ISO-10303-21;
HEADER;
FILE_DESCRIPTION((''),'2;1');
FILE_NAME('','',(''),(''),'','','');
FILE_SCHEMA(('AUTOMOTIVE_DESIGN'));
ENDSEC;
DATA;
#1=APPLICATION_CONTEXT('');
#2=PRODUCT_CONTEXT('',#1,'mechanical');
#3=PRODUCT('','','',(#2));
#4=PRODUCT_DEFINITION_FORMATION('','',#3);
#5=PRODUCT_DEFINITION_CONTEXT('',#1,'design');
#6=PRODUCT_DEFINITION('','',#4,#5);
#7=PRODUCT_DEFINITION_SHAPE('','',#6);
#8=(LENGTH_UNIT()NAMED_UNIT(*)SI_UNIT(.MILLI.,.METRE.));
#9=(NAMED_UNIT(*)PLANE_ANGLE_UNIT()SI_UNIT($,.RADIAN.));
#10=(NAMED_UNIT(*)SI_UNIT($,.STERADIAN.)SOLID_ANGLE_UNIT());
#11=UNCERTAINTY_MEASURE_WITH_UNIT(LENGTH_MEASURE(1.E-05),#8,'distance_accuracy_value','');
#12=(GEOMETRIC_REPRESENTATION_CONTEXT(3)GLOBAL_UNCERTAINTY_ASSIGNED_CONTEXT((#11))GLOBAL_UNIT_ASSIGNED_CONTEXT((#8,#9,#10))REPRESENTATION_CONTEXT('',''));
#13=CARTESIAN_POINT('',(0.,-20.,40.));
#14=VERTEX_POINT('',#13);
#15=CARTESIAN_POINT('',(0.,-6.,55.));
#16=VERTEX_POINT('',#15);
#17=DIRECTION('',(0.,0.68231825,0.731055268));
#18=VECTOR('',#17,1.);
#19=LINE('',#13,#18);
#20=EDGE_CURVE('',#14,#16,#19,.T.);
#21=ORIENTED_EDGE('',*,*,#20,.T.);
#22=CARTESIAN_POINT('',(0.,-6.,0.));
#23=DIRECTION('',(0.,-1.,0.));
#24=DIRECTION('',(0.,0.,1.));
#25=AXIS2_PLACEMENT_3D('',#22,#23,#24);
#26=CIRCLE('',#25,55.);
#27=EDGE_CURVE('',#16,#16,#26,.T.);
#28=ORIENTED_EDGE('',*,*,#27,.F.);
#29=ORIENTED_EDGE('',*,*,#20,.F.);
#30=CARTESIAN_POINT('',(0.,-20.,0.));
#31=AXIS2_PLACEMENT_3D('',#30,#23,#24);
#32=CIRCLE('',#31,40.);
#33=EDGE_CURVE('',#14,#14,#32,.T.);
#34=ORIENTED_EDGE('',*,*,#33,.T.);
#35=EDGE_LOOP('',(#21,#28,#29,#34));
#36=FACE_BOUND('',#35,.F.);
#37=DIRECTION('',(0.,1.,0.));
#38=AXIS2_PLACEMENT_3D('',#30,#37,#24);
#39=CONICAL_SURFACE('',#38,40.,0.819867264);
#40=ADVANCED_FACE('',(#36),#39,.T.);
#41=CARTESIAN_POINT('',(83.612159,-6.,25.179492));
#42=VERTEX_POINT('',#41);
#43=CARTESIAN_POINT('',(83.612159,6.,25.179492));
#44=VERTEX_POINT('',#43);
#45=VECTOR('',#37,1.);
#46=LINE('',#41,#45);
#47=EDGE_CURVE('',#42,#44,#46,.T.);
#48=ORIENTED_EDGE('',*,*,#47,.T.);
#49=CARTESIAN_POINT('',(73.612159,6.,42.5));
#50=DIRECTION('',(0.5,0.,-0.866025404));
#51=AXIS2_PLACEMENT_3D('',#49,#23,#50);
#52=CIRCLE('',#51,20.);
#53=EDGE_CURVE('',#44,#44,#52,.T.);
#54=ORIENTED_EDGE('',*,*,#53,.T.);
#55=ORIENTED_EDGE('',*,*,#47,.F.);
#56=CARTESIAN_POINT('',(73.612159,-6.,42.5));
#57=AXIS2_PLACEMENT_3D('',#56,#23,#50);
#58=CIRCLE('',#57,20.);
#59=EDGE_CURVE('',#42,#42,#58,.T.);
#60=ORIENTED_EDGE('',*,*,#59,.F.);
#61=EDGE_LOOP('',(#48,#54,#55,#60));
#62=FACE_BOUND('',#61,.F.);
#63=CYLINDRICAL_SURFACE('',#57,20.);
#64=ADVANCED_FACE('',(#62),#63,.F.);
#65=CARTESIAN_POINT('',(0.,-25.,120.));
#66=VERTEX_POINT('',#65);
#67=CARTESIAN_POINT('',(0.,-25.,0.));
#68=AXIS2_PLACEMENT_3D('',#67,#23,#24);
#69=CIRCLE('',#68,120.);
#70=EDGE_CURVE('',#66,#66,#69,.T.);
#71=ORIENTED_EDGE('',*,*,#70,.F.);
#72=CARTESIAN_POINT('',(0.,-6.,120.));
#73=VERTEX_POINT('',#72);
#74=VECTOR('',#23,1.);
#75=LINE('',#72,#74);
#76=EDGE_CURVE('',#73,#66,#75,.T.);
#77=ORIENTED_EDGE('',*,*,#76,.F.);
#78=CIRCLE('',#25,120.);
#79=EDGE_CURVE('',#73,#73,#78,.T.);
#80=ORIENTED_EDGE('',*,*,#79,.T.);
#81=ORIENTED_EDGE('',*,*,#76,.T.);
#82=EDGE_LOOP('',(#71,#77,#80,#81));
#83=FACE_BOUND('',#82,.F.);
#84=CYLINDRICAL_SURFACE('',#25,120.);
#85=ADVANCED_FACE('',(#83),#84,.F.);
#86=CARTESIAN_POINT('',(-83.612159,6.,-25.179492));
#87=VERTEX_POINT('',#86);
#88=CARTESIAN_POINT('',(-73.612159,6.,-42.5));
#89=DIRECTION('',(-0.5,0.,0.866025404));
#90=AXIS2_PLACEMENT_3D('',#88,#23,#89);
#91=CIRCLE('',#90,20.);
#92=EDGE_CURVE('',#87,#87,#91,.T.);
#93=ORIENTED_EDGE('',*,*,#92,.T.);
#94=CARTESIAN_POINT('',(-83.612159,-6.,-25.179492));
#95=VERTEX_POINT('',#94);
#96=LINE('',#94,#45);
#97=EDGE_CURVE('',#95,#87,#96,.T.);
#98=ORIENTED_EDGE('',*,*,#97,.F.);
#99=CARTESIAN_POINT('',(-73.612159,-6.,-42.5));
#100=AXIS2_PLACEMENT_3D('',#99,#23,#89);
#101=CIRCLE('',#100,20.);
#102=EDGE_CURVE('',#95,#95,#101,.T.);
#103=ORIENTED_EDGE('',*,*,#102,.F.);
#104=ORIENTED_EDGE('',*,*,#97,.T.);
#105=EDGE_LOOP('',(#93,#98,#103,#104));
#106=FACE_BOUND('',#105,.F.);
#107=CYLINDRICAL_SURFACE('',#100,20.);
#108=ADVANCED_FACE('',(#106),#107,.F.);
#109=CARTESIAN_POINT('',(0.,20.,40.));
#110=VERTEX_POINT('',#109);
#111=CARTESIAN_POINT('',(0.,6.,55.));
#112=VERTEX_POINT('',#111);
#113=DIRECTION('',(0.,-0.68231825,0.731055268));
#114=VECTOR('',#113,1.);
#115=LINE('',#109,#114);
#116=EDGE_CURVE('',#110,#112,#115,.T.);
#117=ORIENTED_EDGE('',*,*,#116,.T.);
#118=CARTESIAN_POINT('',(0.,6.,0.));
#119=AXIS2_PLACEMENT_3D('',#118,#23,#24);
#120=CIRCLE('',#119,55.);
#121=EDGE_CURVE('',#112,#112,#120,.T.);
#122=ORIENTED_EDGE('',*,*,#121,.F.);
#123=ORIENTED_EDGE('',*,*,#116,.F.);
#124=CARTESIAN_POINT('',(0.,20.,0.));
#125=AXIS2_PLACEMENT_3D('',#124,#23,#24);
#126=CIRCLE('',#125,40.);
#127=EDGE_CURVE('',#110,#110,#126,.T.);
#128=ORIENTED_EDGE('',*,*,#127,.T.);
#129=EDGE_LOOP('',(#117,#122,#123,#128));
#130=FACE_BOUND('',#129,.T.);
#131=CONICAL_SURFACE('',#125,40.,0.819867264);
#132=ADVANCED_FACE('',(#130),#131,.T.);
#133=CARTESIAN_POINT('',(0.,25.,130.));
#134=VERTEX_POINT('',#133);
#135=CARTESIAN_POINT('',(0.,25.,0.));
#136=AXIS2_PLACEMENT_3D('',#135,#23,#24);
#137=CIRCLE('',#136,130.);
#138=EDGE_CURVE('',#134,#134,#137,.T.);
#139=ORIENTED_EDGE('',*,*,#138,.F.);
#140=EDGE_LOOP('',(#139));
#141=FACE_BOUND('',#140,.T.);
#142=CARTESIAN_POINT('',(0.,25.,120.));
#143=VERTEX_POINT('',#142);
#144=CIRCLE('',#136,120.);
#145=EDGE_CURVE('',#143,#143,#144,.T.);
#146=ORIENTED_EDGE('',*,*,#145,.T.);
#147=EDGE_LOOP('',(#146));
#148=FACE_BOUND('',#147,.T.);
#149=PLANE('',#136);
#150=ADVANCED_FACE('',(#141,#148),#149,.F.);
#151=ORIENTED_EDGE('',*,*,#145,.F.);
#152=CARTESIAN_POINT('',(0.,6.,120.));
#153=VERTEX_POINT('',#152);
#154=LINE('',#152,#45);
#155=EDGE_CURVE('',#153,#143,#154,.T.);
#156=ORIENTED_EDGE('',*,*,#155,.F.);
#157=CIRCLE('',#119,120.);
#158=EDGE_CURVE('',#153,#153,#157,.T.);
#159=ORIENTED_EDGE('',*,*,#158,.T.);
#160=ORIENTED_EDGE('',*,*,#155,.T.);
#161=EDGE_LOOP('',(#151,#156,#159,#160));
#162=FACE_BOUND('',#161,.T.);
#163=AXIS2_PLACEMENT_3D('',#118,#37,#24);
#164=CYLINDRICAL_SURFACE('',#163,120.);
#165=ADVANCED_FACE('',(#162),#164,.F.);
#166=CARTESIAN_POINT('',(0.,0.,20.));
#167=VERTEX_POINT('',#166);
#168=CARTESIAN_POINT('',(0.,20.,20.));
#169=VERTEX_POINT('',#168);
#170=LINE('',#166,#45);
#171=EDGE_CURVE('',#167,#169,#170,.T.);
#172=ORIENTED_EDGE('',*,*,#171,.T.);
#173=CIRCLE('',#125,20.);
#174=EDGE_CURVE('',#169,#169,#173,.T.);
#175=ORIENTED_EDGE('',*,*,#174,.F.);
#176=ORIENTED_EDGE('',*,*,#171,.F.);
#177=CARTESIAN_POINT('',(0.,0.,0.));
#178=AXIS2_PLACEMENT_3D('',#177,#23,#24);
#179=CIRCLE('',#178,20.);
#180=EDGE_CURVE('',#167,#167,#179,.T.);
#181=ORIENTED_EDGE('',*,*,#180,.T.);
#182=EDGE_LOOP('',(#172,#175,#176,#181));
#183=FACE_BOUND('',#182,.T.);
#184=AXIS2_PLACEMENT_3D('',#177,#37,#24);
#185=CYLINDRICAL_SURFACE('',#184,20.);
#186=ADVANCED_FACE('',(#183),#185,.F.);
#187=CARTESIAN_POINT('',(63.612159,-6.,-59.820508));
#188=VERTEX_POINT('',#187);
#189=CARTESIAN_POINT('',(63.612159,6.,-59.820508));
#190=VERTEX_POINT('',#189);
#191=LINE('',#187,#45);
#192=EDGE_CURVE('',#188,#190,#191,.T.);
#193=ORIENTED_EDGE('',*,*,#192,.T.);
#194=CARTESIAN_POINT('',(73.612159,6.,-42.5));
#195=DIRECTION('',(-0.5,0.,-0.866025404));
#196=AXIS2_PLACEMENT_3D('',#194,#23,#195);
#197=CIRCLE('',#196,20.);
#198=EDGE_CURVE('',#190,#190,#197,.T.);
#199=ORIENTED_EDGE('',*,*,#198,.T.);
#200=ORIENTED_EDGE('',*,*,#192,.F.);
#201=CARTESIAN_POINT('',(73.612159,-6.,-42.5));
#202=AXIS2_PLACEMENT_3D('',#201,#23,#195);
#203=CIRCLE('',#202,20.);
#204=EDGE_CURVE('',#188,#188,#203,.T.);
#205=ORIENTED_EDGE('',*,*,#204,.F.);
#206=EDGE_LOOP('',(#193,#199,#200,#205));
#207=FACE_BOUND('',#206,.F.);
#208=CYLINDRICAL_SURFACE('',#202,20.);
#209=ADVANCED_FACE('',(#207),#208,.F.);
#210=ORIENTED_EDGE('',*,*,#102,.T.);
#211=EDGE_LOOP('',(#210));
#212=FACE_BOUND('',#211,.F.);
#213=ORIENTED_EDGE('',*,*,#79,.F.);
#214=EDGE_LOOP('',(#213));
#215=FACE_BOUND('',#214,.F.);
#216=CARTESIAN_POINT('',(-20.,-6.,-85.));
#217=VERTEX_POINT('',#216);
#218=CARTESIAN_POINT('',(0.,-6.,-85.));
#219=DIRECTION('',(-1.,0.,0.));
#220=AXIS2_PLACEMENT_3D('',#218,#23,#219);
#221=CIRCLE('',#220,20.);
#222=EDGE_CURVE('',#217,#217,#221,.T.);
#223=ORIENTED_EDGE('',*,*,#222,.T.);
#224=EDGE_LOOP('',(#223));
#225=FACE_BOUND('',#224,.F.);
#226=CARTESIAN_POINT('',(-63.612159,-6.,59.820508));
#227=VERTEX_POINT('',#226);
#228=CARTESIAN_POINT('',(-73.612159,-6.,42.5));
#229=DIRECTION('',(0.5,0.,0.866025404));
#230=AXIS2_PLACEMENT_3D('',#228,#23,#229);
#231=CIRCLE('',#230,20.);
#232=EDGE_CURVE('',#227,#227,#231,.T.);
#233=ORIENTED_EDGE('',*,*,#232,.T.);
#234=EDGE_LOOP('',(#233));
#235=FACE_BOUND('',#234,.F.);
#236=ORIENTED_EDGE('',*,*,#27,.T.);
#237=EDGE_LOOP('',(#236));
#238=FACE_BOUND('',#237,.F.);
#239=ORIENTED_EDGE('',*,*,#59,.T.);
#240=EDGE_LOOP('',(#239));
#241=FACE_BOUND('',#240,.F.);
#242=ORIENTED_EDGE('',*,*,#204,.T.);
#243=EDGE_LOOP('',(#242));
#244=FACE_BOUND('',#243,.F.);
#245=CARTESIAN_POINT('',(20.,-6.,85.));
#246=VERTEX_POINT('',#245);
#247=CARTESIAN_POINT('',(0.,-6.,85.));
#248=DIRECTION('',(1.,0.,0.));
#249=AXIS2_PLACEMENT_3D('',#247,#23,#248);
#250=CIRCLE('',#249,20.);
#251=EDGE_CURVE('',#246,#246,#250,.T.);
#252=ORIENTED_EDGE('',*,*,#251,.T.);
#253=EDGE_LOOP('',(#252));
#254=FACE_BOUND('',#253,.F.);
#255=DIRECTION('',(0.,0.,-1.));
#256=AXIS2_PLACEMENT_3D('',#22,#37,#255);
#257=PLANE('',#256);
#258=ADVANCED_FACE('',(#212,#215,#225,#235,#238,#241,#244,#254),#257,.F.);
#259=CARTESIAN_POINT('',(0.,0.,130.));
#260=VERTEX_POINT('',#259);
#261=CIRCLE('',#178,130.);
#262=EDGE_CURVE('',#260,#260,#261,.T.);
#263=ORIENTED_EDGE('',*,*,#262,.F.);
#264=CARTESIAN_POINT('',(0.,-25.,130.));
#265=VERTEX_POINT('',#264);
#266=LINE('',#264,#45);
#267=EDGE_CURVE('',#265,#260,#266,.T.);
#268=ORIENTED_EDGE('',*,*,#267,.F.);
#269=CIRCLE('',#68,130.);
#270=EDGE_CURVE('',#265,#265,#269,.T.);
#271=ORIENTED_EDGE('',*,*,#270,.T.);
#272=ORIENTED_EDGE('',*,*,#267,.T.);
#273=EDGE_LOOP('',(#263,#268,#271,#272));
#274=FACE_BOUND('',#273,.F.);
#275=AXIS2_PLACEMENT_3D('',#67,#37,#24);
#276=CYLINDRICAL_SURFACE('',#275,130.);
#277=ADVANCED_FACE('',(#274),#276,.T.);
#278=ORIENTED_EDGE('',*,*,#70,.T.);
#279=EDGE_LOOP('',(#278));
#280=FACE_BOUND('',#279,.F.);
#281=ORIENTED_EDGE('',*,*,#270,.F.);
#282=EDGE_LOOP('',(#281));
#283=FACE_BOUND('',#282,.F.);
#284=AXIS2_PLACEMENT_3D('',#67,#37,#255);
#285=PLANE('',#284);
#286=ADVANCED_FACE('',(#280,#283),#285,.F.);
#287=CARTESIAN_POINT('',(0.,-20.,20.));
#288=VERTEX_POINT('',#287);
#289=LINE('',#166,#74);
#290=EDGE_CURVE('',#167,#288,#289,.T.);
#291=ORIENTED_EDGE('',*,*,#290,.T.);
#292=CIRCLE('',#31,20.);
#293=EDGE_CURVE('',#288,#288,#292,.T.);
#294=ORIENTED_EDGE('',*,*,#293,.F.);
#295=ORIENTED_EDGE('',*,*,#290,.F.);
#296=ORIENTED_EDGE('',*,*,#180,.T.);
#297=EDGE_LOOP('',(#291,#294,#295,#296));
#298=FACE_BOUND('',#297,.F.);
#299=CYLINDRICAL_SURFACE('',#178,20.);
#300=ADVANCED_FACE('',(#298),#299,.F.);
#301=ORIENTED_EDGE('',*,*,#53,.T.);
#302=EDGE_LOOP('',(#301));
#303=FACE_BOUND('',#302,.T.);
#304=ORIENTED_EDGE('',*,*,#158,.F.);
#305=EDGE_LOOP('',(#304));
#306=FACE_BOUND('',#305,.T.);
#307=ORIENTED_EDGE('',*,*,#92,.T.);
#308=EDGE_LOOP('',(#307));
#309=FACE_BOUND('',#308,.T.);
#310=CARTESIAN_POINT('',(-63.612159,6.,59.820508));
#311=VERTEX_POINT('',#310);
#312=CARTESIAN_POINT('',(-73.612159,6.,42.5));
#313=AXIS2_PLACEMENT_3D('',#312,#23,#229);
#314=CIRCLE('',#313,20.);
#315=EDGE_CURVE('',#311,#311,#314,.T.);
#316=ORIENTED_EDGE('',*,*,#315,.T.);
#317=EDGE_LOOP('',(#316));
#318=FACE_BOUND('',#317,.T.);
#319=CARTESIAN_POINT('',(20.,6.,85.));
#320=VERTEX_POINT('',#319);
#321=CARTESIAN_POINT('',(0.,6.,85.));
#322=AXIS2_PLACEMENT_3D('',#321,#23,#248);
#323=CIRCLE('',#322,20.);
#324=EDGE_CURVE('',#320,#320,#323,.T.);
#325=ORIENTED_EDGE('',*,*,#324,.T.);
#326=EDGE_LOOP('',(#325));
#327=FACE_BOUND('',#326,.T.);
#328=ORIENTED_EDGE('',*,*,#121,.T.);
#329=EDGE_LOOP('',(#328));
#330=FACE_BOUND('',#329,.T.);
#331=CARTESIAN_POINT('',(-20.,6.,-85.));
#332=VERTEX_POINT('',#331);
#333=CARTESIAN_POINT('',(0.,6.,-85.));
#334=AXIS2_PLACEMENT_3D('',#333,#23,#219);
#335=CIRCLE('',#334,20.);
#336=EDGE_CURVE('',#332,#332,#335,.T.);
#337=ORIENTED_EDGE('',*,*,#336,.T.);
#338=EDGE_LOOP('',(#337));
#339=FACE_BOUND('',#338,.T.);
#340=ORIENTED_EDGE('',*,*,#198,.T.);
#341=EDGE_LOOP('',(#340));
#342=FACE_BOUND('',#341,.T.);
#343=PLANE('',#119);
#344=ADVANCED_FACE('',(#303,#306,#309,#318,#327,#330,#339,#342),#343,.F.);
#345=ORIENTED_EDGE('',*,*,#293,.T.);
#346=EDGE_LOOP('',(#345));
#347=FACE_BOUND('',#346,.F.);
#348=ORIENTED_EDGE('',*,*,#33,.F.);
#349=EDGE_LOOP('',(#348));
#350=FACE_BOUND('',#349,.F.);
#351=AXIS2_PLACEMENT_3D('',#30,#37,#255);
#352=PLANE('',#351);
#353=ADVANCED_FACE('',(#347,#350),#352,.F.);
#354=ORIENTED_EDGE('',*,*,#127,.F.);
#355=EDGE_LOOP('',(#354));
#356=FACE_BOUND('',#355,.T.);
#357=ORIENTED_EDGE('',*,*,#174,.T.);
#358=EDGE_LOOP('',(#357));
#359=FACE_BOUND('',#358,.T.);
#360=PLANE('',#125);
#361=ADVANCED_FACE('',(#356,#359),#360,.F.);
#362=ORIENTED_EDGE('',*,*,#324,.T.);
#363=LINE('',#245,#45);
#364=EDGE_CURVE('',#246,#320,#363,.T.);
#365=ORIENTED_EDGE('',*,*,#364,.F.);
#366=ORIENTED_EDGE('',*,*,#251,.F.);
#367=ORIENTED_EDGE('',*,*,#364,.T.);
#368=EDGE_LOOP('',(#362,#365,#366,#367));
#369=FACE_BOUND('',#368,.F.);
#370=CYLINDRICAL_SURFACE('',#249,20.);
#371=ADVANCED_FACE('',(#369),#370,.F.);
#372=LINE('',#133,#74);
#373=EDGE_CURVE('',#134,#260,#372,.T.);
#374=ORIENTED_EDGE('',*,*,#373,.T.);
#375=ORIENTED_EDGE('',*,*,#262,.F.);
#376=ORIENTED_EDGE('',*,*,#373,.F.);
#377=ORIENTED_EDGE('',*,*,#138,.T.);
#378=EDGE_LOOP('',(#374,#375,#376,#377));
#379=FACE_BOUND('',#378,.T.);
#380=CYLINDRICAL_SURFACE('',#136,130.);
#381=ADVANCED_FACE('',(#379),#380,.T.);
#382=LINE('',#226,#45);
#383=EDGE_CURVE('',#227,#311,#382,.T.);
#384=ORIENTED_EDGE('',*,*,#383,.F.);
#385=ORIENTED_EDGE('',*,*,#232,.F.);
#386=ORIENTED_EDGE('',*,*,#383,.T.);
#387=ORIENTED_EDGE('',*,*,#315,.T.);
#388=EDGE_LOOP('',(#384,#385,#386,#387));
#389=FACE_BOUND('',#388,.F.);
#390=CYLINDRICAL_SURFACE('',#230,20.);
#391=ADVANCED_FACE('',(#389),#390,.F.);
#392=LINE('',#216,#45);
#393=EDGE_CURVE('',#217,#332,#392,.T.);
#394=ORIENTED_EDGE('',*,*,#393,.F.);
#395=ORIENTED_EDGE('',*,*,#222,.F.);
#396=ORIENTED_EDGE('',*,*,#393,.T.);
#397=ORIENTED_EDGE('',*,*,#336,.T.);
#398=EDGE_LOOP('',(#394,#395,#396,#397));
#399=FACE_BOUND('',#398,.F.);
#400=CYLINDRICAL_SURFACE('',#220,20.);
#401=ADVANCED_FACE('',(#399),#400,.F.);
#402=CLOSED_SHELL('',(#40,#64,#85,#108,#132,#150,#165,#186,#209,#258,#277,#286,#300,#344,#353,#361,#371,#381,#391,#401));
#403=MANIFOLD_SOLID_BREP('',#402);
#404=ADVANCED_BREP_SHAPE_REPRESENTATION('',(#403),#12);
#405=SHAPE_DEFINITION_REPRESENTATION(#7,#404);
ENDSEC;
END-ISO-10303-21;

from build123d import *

# Parameters (mm, degrees)
F5_R            = 20
F6_DEPTH        = 25
F6_COPIES_COUNT = 6


# Not quite as in the source:
# - a pattern or mirror of a feature is missing from the dataset's text; its kind, count and spacing are read off the source's solid


with BuildPart() as f3:
    # F0 (on Right) → F3 (revolve)
    with BuildSketch(Plane.YZ):
        Polygon((25, 130), (0, 130), (0, 20), (20, 20), (20, 40), (6, 55), (6, 120), (25, 120), align=None)
    revolve(axis=Axis((0, 0.1935698092, 0), (0, -1, 0)))

    # F4: F3 across plane


with BuildPart() as f3_1:
    add(f3.part)
    add(f3.part.mirror(Plane.XZ))

    # F5 (on face) → F6 (cut)
    with BuildSketch(Plane.XZ.offset(6)):
        with Locations((0, 85)):
            Circle(F5_R)
    f6 = extrude(amount=-F6_DEPTH, mode=Mode.SUBTRACT)

    # F6_copies: F6 ×6 about axis
    f6_copies_axis = Axis((0, 0, 0), (0, 1, 0))
    for i in range(1, F6_COPIES_COUNT):
        add(f6.rotate(f6_copies_axis, i * 360 / F6_COPIES_COUNT), mode=Mode.SUBTRACT)


solid = f3_1.part
